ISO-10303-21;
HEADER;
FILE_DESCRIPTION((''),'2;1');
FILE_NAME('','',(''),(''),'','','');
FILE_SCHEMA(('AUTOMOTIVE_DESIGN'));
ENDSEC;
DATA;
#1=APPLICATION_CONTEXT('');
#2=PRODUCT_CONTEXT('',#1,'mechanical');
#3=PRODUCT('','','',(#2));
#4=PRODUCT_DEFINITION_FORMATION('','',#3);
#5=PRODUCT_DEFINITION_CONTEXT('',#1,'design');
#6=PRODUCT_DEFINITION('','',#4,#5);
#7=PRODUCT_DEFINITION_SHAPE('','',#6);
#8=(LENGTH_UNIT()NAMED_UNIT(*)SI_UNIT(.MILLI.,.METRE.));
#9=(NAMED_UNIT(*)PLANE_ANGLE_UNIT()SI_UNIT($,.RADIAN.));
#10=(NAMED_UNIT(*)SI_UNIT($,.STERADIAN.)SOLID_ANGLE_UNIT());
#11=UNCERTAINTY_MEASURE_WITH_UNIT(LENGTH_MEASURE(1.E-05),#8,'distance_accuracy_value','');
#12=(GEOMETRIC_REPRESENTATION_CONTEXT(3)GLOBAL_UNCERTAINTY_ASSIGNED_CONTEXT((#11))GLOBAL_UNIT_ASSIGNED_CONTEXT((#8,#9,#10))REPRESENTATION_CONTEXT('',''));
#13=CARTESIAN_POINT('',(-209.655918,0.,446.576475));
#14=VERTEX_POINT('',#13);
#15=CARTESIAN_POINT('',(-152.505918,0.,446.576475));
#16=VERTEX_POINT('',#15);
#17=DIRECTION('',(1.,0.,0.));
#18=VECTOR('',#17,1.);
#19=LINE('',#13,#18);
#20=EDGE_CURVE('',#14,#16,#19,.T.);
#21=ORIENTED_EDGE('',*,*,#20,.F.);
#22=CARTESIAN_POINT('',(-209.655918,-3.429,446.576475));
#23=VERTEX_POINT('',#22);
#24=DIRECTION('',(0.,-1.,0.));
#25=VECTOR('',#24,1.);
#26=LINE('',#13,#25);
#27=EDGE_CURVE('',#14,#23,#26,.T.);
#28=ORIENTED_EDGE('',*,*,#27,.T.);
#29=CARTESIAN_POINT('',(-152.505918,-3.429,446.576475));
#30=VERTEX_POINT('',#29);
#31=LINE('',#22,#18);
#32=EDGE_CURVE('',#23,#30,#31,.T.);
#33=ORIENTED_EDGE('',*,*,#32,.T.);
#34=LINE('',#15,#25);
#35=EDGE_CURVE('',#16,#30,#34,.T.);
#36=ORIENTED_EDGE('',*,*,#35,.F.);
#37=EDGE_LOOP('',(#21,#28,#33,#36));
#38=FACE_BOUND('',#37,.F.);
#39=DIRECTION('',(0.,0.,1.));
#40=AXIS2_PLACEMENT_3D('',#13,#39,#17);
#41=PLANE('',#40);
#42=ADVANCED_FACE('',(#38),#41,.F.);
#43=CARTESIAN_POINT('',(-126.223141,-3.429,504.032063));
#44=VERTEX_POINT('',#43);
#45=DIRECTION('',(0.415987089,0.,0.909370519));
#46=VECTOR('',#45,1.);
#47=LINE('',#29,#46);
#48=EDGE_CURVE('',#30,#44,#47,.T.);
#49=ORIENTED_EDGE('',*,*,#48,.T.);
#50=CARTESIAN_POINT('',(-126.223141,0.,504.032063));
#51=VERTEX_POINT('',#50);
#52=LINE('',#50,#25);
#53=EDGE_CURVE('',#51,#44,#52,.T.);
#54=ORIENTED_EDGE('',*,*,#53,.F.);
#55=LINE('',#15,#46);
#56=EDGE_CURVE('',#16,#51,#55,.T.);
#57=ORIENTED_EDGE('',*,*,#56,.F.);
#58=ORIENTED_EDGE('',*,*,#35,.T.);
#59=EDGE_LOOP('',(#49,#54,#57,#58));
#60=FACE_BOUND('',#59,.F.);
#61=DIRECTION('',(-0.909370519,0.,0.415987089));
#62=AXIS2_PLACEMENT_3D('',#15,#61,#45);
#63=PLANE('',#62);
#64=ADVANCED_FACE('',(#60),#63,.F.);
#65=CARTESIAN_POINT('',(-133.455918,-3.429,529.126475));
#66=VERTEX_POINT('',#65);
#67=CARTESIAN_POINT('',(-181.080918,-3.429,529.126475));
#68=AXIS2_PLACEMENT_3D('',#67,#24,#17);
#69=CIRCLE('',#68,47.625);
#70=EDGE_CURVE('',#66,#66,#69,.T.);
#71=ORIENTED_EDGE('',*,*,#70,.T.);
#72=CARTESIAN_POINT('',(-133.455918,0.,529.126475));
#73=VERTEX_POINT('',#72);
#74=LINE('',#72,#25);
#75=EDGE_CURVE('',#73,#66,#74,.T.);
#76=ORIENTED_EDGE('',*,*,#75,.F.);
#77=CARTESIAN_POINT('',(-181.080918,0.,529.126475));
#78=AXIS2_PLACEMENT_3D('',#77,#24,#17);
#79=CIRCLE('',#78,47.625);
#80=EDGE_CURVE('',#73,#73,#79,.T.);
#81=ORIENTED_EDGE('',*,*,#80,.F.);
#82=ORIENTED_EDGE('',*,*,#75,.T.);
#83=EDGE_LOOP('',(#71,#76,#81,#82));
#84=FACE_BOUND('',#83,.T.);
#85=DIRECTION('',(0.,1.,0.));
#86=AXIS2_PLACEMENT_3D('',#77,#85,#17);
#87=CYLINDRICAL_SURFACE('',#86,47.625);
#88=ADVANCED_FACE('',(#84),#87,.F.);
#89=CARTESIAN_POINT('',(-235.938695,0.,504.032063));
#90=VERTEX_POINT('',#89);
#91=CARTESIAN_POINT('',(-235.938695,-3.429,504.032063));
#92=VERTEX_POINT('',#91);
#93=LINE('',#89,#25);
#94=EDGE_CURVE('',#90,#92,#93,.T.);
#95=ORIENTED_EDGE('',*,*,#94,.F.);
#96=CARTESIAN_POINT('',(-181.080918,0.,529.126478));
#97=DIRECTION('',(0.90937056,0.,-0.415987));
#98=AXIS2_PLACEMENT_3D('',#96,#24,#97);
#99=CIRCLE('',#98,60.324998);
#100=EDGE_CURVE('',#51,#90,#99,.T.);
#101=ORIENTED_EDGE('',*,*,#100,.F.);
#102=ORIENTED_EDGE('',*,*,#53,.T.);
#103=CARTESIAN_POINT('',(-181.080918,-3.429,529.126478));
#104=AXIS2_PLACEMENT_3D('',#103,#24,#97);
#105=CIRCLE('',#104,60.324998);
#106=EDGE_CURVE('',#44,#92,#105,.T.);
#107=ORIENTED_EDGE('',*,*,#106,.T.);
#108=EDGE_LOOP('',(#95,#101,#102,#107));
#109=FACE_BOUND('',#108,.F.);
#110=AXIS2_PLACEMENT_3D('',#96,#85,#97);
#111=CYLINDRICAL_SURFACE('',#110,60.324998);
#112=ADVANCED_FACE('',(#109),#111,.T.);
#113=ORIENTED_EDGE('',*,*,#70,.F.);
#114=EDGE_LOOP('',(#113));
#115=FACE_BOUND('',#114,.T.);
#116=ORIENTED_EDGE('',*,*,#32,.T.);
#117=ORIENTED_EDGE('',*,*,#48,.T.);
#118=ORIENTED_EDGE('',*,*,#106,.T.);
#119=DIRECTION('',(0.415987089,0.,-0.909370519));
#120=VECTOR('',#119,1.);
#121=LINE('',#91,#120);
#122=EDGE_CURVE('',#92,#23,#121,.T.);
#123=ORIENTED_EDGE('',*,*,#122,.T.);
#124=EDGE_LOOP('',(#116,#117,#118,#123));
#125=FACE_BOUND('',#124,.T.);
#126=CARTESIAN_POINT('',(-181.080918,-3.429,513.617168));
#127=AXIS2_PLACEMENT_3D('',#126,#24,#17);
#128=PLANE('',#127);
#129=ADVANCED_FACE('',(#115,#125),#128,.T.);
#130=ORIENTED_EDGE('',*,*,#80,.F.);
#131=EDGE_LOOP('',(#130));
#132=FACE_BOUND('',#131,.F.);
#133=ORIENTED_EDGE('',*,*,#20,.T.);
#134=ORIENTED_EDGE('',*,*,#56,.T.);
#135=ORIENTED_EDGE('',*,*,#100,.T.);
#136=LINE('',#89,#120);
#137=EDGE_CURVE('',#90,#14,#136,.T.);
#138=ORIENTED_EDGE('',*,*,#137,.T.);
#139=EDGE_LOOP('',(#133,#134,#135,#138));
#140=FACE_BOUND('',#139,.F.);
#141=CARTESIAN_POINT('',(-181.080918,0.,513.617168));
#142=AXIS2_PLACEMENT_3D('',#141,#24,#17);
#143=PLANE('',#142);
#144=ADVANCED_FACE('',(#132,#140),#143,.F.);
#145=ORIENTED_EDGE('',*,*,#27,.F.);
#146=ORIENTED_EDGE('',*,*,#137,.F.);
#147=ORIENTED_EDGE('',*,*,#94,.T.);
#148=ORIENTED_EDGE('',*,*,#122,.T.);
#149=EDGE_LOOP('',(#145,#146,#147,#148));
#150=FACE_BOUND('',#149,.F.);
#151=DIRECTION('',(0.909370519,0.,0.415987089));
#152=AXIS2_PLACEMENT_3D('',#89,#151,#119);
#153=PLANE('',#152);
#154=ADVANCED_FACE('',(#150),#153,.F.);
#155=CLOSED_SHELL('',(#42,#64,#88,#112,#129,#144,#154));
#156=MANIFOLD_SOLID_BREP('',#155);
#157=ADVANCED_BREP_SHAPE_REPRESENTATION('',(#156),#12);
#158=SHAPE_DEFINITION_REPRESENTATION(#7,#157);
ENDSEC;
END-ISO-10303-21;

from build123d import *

# Parameters (mm, degrees)
F0_R     = 47.625
F1_DEPTH = 3.429


# Not quite as in the source:
# - ends of sketch curves that miss each other by under 0.0002 mm in the source are joined


with BuildPart() as f1:
    # F0 (on Front) → F1 (new body)
    with BuildSketch(Plane.XZ):
        with BuildLine():
            Line((-235.938695, 504.0320628), (-209.655918, 446.5764754))
            Line((-209.655918, 446.5764754), (-152.505918, 446.5764754))
            Line((-152.505918, 446.5764754), (-126.223141, 504.0320628))
            ThreePointArc((-126.223141, 504.0320628), (-181.080918, 589.4514754), (-235.938695, 504.0320628))
        make_face()
        with Locations((-181.080918, 529.1264754)):
            Circle(F0_R, mode=Mode.SUBTRACT)
    extrude(amount=F1_DEPTH)


solid = f1.part
